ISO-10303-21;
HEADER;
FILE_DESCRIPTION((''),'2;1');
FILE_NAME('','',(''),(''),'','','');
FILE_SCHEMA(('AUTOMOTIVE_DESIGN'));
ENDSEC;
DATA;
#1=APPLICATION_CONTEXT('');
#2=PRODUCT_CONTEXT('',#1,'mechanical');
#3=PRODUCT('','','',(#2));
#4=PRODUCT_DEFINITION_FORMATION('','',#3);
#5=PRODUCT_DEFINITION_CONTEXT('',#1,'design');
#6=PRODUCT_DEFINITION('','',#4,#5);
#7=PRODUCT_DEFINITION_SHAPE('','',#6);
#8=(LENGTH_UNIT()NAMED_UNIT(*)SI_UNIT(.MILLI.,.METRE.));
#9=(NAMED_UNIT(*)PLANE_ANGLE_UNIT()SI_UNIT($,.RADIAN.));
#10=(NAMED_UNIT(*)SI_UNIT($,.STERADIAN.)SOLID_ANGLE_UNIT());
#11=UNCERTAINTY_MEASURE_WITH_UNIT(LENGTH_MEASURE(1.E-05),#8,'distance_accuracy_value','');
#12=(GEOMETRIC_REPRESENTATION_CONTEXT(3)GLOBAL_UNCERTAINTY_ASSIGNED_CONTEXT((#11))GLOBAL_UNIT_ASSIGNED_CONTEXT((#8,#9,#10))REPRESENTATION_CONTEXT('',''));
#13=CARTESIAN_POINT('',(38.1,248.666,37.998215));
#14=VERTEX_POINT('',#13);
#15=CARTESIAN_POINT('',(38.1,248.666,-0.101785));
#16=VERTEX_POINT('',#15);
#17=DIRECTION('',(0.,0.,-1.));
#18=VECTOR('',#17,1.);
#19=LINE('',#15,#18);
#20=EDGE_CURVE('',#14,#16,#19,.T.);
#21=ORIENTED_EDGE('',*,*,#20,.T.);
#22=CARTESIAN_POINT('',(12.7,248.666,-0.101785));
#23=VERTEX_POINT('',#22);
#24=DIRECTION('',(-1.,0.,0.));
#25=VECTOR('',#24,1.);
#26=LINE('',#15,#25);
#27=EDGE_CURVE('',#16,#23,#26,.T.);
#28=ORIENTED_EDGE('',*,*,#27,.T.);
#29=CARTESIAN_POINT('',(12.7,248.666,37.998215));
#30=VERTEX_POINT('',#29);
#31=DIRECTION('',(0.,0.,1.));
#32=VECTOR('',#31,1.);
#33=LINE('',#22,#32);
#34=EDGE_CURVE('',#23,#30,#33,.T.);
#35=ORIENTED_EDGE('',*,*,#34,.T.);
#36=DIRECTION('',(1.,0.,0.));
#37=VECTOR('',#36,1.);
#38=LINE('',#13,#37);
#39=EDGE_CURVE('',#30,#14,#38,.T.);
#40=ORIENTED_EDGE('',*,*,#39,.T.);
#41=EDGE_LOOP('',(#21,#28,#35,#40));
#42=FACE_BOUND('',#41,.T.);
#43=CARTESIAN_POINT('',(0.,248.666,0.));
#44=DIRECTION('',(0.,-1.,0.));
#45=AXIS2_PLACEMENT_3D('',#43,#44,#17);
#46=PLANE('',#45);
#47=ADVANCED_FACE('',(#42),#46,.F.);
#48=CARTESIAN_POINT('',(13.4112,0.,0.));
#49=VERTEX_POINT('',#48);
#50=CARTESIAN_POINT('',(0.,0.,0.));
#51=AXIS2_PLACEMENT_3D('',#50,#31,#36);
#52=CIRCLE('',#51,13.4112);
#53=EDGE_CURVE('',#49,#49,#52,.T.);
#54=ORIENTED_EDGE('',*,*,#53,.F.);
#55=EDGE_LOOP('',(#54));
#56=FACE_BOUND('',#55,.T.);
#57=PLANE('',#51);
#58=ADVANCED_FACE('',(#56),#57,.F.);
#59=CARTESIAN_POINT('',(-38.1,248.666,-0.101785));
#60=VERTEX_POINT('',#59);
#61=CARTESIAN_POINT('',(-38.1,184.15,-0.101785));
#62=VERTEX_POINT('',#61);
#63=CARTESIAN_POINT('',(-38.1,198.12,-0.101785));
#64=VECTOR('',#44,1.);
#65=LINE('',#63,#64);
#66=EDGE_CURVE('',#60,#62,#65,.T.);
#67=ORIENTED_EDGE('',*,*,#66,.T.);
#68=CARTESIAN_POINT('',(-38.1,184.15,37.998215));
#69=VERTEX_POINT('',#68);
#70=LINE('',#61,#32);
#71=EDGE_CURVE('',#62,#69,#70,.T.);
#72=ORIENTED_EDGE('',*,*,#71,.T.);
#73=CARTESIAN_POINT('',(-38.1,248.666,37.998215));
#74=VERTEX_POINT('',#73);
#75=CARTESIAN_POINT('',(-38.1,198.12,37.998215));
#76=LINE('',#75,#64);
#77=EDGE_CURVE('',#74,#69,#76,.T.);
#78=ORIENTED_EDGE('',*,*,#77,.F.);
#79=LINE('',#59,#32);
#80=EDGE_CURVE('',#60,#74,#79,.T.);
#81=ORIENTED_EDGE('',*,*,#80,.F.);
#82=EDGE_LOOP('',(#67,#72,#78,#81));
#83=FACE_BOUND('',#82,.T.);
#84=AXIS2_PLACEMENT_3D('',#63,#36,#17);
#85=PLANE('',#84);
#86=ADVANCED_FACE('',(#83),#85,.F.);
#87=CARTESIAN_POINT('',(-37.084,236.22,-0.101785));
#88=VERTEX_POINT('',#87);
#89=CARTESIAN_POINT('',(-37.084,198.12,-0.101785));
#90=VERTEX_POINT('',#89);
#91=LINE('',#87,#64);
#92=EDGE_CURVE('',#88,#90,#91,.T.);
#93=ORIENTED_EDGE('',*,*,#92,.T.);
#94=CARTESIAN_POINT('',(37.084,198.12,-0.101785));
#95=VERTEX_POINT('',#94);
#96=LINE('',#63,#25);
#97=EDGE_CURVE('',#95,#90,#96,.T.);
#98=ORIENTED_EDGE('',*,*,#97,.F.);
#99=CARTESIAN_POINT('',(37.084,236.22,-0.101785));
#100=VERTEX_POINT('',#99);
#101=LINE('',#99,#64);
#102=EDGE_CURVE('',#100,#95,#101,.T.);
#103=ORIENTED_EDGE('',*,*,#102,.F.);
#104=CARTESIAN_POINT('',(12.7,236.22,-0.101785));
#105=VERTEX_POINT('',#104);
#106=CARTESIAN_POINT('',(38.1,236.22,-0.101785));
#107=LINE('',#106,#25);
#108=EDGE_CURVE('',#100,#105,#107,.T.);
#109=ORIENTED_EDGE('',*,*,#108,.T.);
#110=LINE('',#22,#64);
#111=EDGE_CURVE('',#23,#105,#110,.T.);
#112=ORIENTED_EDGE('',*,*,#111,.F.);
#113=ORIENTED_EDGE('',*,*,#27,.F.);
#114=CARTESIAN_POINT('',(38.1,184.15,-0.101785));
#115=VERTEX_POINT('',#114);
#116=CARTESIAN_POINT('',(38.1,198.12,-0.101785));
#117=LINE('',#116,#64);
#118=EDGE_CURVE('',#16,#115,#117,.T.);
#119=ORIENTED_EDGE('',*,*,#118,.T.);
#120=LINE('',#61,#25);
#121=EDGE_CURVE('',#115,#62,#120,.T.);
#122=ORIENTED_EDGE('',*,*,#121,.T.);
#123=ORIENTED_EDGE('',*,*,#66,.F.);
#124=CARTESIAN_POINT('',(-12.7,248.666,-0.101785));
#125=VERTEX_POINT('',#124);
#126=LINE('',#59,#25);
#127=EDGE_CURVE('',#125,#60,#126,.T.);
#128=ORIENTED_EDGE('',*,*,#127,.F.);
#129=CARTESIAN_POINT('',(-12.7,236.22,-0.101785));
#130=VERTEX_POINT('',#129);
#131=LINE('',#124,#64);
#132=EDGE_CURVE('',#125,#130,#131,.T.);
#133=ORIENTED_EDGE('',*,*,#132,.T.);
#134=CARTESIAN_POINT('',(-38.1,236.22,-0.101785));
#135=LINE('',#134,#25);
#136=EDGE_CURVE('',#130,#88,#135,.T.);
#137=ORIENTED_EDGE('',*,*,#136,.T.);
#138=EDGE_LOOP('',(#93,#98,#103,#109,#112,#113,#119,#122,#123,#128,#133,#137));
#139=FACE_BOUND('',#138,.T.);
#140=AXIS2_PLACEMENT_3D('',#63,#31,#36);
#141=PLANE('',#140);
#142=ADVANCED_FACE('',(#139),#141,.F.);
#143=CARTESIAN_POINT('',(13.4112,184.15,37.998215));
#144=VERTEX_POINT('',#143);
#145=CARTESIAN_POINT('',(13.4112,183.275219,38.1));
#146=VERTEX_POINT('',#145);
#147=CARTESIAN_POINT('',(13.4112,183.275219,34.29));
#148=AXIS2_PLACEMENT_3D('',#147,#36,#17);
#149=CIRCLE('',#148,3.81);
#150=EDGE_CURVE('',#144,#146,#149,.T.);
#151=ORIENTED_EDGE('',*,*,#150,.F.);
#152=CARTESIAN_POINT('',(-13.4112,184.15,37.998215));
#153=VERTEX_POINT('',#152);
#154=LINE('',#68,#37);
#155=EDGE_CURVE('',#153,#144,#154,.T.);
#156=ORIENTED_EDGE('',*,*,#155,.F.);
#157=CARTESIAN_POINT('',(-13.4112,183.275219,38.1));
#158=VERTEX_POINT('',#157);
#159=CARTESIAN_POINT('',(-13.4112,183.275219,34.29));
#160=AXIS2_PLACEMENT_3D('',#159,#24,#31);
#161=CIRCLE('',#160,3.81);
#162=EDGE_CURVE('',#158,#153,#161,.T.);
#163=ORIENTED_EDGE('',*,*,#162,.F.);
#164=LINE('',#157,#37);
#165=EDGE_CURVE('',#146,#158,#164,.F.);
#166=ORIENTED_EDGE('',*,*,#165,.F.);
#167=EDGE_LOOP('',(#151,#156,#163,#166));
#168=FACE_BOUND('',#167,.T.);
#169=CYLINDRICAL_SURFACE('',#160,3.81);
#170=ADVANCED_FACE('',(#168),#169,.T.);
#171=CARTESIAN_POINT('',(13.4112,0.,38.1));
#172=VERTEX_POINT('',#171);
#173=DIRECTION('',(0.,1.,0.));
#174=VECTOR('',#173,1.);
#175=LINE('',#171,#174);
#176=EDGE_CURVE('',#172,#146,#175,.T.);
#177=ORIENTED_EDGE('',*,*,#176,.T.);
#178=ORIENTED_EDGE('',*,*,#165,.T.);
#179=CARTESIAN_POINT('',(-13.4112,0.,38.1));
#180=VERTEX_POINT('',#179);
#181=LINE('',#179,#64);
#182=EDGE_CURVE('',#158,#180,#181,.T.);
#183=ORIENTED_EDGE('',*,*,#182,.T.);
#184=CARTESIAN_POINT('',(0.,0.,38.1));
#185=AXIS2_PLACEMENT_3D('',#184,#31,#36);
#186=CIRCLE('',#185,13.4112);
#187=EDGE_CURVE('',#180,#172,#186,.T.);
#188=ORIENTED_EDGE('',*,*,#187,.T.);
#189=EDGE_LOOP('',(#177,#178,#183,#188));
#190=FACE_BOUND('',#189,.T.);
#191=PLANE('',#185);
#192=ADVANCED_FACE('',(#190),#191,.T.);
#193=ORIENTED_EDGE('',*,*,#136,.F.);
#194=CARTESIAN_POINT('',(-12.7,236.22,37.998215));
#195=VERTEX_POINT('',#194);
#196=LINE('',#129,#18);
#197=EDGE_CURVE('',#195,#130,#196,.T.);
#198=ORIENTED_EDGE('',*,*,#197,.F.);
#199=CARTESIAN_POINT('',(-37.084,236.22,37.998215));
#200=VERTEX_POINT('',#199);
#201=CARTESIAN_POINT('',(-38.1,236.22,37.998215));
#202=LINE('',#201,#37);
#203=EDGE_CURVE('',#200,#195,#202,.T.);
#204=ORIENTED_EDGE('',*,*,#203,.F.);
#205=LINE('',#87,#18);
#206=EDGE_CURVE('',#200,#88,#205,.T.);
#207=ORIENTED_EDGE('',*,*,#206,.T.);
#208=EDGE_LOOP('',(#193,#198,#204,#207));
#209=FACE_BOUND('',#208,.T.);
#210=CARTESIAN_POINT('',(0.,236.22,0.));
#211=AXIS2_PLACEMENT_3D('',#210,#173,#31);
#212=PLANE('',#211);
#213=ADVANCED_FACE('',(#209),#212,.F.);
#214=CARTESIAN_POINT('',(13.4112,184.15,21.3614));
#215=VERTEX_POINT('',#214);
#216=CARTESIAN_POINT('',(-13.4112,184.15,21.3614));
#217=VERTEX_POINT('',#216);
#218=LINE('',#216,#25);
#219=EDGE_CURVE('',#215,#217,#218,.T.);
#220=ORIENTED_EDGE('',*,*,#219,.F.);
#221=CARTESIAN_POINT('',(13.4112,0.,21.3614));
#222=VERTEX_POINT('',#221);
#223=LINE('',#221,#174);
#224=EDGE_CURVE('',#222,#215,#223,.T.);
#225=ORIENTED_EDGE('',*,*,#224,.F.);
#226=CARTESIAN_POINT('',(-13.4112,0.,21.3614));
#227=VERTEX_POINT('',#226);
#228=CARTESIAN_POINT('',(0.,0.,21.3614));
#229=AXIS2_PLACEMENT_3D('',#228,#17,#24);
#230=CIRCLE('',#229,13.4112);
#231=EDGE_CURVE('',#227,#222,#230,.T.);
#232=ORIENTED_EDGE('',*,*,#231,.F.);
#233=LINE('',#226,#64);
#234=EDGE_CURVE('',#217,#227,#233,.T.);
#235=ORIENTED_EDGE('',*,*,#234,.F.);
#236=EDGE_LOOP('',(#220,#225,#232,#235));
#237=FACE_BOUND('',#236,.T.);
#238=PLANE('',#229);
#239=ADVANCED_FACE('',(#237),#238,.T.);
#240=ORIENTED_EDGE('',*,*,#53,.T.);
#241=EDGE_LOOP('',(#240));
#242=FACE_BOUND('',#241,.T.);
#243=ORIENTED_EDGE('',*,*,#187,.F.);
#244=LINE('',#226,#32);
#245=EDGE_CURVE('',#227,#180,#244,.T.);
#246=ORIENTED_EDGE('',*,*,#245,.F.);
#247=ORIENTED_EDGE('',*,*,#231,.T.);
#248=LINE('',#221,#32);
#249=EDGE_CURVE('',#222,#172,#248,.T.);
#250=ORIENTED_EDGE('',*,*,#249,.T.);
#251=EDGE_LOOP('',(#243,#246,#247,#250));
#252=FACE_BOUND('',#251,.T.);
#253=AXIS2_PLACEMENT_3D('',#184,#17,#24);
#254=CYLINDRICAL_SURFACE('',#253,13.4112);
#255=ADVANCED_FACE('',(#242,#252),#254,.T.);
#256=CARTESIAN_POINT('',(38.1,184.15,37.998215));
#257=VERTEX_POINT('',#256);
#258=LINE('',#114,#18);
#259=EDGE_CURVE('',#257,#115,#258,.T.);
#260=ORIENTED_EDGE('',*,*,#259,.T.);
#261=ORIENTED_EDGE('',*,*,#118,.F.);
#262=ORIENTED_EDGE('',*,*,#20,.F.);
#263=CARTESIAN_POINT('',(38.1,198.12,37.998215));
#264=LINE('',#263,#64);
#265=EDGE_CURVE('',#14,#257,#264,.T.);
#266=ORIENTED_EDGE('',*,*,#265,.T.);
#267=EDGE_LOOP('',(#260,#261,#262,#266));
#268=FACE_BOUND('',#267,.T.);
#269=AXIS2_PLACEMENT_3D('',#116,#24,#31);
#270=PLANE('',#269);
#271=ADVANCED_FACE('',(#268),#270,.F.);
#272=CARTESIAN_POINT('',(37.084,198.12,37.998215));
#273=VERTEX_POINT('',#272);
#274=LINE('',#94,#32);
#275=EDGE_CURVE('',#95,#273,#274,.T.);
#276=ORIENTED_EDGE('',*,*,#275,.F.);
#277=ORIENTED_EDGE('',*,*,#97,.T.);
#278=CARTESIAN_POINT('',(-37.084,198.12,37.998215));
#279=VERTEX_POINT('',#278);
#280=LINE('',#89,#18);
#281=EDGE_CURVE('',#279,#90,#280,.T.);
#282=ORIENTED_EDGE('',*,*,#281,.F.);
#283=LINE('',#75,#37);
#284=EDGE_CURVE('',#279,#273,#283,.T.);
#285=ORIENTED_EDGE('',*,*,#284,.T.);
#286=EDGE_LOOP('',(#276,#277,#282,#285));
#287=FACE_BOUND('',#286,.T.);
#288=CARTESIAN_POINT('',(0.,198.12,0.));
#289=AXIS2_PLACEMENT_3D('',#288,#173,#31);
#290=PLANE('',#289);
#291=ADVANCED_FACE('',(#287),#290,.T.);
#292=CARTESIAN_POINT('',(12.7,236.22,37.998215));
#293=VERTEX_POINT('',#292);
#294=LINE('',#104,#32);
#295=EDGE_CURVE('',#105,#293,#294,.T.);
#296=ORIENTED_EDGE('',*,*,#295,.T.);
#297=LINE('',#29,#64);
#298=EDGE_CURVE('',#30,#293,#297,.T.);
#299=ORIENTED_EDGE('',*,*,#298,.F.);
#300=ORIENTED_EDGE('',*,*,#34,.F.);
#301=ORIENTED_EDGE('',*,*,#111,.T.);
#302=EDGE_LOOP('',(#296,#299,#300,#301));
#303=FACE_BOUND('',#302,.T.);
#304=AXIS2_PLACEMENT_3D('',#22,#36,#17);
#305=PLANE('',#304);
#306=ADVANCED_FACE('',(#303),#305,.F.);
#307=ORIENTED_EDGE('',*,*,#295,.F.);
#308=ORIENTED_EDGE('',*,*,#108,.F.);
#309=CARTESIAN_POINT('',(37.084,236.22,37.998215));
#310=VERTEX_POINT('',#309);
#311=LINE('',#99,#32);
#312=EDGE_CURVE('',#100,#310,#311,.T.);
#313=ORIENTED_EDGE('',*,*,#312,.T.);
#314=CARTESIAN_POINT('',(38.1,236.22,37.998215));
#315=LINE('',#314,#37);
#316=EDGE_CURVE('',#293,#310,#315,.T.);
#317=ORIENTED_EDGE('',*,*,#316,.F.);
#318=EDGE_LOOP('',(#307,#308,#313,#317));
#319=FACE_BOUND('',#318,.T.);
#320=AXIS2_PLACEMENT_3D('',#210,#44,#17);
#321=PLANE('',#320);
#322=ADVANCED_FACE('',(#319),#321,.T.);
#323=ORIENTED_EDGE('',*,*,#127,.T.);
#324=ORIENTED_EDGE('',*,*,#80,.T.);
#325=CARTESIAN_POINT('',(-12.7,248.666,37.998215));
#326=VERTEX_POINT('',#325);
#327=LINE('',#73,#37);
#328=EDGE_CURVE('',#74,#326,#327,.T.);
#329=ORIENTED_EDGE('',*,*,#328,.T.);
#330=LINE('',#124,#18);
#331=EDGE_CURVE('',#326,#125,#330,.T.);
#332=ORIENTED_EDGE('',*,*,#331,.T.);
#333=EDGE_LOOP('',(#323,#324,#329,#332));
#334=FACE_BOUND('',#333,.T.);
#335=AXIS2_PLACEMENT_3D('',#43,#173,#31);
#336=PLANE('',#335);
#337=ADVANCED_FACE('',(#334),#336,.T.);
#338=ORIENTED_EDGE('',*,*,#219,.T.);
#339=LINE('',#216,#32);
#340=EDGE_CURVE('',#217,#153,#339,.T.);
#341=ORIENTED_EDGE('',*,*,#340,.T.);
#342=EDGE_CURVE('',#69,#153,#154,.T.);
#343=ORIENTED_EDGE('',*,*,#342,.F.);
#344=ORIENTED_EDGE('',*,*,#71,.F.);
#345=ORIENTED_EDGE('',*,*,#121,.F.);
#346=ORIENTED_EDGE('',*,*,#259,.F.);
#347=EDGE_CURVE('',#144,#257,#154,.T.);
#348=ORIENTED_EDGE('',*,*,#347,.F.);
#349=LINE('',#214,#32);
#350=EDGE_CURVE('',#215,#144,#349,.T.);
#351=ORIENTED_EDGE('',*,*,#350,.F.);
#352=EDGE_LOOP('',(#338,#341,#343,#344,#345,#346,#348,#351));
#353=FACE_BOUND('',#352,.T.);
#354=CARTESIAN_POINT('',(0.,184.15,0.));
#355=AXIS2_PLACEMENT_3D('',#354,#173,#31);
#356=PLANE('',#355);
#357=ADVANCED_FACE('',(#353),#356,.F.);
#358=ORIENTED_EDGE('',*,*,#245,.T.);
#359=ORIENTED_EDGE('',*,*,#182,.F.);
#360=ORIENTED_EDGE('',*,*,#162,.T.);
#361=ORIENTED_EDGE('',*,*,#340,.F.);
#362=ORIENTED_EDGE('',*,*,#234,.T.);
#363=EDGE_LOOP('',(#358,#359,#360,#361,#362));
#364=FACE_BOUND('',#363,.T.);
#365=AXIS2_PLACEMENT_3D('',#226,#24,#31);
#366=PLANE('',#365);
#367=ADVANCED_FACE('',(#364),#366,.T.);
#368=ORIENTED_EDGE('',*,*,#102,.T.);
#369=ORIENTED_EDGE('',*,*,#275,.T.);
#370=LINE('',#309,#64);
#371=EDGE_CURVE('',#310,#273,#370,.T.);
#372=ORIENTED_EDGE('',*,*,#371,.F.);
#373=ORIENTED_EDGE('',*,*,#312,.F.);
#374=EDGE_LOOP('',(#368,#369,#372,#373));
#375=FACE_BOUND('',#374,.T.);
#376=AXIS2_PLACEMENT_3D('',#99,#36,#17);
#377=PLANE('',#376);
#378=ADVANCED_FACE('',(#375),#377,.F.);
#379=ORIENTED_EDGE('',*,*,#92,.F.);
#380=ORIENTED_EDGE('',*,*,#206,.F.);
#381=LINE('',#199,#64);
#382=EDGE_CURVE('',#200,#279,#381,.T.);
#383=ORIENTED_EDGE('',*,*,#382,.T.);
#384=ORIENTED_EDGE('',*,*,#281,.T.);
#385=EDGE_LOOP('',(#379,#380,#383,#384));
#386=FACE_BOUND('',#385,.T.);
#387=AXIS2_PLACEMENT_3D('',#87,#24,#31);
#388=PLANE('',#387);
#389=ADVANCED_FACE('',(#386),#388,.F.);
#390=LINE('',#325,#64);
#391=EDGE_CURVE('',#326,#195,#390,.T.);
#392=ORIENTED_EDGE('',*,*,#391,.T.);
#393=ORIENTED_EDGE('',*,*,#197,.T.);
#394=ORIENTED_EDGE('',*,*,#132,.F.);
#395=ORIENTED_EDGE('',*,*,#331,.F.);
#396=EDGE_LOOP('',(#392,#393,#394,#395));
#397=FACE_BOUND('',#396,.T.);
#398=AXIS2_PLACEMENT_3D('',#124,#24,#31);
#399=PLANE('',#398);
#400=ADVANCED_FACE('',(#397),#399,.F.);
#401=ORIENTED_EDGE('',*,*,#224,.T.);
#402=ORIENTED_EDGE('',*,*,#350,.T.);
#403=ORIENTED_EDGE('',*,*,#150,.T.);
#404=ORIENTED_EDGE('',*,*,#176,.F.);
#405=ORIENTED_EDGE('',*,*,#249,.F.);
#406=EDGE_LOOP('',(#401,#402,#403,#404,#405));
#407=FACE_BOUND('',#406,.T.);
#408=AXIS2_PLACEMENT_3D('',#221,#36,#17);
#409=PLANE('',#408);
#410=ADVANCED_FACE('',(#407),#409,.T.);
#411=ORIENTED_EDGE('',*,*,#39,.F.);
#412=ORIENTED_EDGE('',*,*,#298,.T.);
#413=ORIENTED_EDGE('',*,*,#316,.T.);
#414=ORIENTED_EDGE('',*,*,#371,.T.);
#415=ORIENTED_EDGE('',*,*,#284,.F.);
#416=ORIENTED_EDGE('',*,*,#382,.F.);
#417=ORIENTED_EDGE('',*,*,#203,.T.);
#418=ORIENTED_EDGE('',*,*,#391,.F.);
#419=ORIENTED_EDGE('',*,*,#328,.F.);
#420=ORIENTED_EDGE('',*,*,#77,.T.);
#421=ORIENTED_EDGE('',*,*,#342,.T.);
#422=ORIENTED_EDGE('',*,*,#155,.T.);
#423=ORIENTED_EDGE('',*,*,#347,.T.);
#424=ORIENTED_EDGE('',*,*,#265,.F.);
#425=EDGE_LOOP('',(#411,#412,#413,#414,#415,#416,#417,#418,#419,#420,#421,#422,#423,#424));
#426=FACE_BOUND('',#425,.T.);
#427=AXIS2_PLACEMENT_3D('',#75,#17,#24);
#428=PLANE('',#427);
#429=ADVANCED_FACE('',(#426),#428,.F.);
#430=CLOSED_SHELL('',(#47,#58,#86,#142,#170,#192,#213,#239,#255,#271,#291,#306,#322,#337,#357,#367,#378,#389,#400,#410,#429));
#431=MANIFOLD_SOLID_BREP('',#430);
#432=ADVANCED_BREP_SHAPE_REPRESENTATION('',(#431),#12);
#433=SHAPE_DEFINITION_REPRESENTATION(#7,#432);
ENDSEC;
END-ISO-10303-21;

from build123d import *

# Parameters (mm, degrees)
SKETCH2_R           = 13.4112
BOSS_EXTRUDE1_DEPTH = 38.1
SKETCH5_W           = 26.8224
SKETCH5_H           = 184.15
BOSS_EXTRUDE2_DEPTH = 16.7386
SKETCH8_W           = 76.2
SKETCH8_H           = 38.1
BOSS_EXTRUDE3_DEPTH = 13.97
SKETCH9_W           = 1.016
SKETCH9_H           = 38.1
BOSS_EXTRUDE4_DEPTH = 38.1
SKETCH10_W          = 25.4
SKETCH10_H          = 38.1
BOSS_EXTRUDE5_DEPTH = 12.446
FILLET1_R           = 3.81


with BuildPart() as part:
    # Sketch2 → Boss-Extrude1 (new body)
    with BuildSketch(Plane.XY):
        with Locations(Location((0, 0, 0), (0, 0, 180))):
            Circle(SKETCH2_R)
    extrude(amount=BOSS_EXTRUDE1_DEPTH)

    # Sketch5 → Boss-Extrude2 (add)
    with BuildSketch(Plane.XY.offset(38.1)):
        with Locations((0, 92.075)):
            Rectangle(SKETCH5_W, SKETCH5_H)
    extrude(amount=-BOSS_EXTRUDE2_DEPTH)

    # Sketch8 → Boss-Extrude3 (add)
    with BuildSketch(Plane(origin=(0, 184.15, 0), x_dir=(1, 0, 0), z_dir=(0, 1, 0))):
        with Locations((0, -18.948214994)):
            Rectangle(SKETCH8_W, SKETCH8_H)
    extrude(amount=BOSS_EXTRUDE3_DEPTH)

    # Sketch9 → Boss-Extrude4 (add)
    with BuildSketch(Plane(origin=(0, 198.12, 0), x_dir=(1, 0, 0), z_dir=(0, 1, 0))):
        with Locations((-37.592, -18.948214994)):
            Rectangle(SKETCH9_W, SKETCH9_H)
        with Locations((37.592, -18.948214994)):
            Rectangle(SKETCH9_W, SKETCH9_H)
    extrude(amount=BOSS_EXTRUDE4_DEPTH)

    # Sketch10 → Boss-Extrude5 (add)
    with BuildSketch(Plane(origin=(0, 236.22, 0), x_dir=(1, 0, 0), z_dir=(0, 1, 0))):
        with Locations((-25.4, -18.948214994)):
            Rectangle(SKETCH10_W, SKETCH10_H)
        with Locations((25.4, -18.948214994)):
            Rectangle(SKETCH10_W, SKETCH10_H)
    extrude(amount=BOSS_EXTRUDE5_DEPTH)

    # Fillet1
    # the kernel refuses this fillet: 3.81 mm, written as the material it takes off along each edge
    with BuildSketch(Plane(origin=(15.598152153, 184.15, 38.1), x_dir=(0, 0, -1), z_dir=(-1, 0, 0))) as fillet1_piece_1:
        with BuildLine():
            CenterArc((3.81, 0.874780861), FILLET1_R, 180, 13.273598337)
            Line((0, 0.874780861), (-0.0762, 0.874780861))
            Line((-0.0762, 0.874780861), (-0.0762, 0))
            Line((-0.0762, 0), (0, -0.0762))
            ThreePointArc((0, -0.0762), (0.050892503, -0.0762), (0.027620706, -0.017495617))
            Line((0.027620706, -0.017495617), (0.101785006, 0))
        make_face()
    extrude(amount=31.196304306, mode=Mode.SUBTRACT)


solid = part.part
